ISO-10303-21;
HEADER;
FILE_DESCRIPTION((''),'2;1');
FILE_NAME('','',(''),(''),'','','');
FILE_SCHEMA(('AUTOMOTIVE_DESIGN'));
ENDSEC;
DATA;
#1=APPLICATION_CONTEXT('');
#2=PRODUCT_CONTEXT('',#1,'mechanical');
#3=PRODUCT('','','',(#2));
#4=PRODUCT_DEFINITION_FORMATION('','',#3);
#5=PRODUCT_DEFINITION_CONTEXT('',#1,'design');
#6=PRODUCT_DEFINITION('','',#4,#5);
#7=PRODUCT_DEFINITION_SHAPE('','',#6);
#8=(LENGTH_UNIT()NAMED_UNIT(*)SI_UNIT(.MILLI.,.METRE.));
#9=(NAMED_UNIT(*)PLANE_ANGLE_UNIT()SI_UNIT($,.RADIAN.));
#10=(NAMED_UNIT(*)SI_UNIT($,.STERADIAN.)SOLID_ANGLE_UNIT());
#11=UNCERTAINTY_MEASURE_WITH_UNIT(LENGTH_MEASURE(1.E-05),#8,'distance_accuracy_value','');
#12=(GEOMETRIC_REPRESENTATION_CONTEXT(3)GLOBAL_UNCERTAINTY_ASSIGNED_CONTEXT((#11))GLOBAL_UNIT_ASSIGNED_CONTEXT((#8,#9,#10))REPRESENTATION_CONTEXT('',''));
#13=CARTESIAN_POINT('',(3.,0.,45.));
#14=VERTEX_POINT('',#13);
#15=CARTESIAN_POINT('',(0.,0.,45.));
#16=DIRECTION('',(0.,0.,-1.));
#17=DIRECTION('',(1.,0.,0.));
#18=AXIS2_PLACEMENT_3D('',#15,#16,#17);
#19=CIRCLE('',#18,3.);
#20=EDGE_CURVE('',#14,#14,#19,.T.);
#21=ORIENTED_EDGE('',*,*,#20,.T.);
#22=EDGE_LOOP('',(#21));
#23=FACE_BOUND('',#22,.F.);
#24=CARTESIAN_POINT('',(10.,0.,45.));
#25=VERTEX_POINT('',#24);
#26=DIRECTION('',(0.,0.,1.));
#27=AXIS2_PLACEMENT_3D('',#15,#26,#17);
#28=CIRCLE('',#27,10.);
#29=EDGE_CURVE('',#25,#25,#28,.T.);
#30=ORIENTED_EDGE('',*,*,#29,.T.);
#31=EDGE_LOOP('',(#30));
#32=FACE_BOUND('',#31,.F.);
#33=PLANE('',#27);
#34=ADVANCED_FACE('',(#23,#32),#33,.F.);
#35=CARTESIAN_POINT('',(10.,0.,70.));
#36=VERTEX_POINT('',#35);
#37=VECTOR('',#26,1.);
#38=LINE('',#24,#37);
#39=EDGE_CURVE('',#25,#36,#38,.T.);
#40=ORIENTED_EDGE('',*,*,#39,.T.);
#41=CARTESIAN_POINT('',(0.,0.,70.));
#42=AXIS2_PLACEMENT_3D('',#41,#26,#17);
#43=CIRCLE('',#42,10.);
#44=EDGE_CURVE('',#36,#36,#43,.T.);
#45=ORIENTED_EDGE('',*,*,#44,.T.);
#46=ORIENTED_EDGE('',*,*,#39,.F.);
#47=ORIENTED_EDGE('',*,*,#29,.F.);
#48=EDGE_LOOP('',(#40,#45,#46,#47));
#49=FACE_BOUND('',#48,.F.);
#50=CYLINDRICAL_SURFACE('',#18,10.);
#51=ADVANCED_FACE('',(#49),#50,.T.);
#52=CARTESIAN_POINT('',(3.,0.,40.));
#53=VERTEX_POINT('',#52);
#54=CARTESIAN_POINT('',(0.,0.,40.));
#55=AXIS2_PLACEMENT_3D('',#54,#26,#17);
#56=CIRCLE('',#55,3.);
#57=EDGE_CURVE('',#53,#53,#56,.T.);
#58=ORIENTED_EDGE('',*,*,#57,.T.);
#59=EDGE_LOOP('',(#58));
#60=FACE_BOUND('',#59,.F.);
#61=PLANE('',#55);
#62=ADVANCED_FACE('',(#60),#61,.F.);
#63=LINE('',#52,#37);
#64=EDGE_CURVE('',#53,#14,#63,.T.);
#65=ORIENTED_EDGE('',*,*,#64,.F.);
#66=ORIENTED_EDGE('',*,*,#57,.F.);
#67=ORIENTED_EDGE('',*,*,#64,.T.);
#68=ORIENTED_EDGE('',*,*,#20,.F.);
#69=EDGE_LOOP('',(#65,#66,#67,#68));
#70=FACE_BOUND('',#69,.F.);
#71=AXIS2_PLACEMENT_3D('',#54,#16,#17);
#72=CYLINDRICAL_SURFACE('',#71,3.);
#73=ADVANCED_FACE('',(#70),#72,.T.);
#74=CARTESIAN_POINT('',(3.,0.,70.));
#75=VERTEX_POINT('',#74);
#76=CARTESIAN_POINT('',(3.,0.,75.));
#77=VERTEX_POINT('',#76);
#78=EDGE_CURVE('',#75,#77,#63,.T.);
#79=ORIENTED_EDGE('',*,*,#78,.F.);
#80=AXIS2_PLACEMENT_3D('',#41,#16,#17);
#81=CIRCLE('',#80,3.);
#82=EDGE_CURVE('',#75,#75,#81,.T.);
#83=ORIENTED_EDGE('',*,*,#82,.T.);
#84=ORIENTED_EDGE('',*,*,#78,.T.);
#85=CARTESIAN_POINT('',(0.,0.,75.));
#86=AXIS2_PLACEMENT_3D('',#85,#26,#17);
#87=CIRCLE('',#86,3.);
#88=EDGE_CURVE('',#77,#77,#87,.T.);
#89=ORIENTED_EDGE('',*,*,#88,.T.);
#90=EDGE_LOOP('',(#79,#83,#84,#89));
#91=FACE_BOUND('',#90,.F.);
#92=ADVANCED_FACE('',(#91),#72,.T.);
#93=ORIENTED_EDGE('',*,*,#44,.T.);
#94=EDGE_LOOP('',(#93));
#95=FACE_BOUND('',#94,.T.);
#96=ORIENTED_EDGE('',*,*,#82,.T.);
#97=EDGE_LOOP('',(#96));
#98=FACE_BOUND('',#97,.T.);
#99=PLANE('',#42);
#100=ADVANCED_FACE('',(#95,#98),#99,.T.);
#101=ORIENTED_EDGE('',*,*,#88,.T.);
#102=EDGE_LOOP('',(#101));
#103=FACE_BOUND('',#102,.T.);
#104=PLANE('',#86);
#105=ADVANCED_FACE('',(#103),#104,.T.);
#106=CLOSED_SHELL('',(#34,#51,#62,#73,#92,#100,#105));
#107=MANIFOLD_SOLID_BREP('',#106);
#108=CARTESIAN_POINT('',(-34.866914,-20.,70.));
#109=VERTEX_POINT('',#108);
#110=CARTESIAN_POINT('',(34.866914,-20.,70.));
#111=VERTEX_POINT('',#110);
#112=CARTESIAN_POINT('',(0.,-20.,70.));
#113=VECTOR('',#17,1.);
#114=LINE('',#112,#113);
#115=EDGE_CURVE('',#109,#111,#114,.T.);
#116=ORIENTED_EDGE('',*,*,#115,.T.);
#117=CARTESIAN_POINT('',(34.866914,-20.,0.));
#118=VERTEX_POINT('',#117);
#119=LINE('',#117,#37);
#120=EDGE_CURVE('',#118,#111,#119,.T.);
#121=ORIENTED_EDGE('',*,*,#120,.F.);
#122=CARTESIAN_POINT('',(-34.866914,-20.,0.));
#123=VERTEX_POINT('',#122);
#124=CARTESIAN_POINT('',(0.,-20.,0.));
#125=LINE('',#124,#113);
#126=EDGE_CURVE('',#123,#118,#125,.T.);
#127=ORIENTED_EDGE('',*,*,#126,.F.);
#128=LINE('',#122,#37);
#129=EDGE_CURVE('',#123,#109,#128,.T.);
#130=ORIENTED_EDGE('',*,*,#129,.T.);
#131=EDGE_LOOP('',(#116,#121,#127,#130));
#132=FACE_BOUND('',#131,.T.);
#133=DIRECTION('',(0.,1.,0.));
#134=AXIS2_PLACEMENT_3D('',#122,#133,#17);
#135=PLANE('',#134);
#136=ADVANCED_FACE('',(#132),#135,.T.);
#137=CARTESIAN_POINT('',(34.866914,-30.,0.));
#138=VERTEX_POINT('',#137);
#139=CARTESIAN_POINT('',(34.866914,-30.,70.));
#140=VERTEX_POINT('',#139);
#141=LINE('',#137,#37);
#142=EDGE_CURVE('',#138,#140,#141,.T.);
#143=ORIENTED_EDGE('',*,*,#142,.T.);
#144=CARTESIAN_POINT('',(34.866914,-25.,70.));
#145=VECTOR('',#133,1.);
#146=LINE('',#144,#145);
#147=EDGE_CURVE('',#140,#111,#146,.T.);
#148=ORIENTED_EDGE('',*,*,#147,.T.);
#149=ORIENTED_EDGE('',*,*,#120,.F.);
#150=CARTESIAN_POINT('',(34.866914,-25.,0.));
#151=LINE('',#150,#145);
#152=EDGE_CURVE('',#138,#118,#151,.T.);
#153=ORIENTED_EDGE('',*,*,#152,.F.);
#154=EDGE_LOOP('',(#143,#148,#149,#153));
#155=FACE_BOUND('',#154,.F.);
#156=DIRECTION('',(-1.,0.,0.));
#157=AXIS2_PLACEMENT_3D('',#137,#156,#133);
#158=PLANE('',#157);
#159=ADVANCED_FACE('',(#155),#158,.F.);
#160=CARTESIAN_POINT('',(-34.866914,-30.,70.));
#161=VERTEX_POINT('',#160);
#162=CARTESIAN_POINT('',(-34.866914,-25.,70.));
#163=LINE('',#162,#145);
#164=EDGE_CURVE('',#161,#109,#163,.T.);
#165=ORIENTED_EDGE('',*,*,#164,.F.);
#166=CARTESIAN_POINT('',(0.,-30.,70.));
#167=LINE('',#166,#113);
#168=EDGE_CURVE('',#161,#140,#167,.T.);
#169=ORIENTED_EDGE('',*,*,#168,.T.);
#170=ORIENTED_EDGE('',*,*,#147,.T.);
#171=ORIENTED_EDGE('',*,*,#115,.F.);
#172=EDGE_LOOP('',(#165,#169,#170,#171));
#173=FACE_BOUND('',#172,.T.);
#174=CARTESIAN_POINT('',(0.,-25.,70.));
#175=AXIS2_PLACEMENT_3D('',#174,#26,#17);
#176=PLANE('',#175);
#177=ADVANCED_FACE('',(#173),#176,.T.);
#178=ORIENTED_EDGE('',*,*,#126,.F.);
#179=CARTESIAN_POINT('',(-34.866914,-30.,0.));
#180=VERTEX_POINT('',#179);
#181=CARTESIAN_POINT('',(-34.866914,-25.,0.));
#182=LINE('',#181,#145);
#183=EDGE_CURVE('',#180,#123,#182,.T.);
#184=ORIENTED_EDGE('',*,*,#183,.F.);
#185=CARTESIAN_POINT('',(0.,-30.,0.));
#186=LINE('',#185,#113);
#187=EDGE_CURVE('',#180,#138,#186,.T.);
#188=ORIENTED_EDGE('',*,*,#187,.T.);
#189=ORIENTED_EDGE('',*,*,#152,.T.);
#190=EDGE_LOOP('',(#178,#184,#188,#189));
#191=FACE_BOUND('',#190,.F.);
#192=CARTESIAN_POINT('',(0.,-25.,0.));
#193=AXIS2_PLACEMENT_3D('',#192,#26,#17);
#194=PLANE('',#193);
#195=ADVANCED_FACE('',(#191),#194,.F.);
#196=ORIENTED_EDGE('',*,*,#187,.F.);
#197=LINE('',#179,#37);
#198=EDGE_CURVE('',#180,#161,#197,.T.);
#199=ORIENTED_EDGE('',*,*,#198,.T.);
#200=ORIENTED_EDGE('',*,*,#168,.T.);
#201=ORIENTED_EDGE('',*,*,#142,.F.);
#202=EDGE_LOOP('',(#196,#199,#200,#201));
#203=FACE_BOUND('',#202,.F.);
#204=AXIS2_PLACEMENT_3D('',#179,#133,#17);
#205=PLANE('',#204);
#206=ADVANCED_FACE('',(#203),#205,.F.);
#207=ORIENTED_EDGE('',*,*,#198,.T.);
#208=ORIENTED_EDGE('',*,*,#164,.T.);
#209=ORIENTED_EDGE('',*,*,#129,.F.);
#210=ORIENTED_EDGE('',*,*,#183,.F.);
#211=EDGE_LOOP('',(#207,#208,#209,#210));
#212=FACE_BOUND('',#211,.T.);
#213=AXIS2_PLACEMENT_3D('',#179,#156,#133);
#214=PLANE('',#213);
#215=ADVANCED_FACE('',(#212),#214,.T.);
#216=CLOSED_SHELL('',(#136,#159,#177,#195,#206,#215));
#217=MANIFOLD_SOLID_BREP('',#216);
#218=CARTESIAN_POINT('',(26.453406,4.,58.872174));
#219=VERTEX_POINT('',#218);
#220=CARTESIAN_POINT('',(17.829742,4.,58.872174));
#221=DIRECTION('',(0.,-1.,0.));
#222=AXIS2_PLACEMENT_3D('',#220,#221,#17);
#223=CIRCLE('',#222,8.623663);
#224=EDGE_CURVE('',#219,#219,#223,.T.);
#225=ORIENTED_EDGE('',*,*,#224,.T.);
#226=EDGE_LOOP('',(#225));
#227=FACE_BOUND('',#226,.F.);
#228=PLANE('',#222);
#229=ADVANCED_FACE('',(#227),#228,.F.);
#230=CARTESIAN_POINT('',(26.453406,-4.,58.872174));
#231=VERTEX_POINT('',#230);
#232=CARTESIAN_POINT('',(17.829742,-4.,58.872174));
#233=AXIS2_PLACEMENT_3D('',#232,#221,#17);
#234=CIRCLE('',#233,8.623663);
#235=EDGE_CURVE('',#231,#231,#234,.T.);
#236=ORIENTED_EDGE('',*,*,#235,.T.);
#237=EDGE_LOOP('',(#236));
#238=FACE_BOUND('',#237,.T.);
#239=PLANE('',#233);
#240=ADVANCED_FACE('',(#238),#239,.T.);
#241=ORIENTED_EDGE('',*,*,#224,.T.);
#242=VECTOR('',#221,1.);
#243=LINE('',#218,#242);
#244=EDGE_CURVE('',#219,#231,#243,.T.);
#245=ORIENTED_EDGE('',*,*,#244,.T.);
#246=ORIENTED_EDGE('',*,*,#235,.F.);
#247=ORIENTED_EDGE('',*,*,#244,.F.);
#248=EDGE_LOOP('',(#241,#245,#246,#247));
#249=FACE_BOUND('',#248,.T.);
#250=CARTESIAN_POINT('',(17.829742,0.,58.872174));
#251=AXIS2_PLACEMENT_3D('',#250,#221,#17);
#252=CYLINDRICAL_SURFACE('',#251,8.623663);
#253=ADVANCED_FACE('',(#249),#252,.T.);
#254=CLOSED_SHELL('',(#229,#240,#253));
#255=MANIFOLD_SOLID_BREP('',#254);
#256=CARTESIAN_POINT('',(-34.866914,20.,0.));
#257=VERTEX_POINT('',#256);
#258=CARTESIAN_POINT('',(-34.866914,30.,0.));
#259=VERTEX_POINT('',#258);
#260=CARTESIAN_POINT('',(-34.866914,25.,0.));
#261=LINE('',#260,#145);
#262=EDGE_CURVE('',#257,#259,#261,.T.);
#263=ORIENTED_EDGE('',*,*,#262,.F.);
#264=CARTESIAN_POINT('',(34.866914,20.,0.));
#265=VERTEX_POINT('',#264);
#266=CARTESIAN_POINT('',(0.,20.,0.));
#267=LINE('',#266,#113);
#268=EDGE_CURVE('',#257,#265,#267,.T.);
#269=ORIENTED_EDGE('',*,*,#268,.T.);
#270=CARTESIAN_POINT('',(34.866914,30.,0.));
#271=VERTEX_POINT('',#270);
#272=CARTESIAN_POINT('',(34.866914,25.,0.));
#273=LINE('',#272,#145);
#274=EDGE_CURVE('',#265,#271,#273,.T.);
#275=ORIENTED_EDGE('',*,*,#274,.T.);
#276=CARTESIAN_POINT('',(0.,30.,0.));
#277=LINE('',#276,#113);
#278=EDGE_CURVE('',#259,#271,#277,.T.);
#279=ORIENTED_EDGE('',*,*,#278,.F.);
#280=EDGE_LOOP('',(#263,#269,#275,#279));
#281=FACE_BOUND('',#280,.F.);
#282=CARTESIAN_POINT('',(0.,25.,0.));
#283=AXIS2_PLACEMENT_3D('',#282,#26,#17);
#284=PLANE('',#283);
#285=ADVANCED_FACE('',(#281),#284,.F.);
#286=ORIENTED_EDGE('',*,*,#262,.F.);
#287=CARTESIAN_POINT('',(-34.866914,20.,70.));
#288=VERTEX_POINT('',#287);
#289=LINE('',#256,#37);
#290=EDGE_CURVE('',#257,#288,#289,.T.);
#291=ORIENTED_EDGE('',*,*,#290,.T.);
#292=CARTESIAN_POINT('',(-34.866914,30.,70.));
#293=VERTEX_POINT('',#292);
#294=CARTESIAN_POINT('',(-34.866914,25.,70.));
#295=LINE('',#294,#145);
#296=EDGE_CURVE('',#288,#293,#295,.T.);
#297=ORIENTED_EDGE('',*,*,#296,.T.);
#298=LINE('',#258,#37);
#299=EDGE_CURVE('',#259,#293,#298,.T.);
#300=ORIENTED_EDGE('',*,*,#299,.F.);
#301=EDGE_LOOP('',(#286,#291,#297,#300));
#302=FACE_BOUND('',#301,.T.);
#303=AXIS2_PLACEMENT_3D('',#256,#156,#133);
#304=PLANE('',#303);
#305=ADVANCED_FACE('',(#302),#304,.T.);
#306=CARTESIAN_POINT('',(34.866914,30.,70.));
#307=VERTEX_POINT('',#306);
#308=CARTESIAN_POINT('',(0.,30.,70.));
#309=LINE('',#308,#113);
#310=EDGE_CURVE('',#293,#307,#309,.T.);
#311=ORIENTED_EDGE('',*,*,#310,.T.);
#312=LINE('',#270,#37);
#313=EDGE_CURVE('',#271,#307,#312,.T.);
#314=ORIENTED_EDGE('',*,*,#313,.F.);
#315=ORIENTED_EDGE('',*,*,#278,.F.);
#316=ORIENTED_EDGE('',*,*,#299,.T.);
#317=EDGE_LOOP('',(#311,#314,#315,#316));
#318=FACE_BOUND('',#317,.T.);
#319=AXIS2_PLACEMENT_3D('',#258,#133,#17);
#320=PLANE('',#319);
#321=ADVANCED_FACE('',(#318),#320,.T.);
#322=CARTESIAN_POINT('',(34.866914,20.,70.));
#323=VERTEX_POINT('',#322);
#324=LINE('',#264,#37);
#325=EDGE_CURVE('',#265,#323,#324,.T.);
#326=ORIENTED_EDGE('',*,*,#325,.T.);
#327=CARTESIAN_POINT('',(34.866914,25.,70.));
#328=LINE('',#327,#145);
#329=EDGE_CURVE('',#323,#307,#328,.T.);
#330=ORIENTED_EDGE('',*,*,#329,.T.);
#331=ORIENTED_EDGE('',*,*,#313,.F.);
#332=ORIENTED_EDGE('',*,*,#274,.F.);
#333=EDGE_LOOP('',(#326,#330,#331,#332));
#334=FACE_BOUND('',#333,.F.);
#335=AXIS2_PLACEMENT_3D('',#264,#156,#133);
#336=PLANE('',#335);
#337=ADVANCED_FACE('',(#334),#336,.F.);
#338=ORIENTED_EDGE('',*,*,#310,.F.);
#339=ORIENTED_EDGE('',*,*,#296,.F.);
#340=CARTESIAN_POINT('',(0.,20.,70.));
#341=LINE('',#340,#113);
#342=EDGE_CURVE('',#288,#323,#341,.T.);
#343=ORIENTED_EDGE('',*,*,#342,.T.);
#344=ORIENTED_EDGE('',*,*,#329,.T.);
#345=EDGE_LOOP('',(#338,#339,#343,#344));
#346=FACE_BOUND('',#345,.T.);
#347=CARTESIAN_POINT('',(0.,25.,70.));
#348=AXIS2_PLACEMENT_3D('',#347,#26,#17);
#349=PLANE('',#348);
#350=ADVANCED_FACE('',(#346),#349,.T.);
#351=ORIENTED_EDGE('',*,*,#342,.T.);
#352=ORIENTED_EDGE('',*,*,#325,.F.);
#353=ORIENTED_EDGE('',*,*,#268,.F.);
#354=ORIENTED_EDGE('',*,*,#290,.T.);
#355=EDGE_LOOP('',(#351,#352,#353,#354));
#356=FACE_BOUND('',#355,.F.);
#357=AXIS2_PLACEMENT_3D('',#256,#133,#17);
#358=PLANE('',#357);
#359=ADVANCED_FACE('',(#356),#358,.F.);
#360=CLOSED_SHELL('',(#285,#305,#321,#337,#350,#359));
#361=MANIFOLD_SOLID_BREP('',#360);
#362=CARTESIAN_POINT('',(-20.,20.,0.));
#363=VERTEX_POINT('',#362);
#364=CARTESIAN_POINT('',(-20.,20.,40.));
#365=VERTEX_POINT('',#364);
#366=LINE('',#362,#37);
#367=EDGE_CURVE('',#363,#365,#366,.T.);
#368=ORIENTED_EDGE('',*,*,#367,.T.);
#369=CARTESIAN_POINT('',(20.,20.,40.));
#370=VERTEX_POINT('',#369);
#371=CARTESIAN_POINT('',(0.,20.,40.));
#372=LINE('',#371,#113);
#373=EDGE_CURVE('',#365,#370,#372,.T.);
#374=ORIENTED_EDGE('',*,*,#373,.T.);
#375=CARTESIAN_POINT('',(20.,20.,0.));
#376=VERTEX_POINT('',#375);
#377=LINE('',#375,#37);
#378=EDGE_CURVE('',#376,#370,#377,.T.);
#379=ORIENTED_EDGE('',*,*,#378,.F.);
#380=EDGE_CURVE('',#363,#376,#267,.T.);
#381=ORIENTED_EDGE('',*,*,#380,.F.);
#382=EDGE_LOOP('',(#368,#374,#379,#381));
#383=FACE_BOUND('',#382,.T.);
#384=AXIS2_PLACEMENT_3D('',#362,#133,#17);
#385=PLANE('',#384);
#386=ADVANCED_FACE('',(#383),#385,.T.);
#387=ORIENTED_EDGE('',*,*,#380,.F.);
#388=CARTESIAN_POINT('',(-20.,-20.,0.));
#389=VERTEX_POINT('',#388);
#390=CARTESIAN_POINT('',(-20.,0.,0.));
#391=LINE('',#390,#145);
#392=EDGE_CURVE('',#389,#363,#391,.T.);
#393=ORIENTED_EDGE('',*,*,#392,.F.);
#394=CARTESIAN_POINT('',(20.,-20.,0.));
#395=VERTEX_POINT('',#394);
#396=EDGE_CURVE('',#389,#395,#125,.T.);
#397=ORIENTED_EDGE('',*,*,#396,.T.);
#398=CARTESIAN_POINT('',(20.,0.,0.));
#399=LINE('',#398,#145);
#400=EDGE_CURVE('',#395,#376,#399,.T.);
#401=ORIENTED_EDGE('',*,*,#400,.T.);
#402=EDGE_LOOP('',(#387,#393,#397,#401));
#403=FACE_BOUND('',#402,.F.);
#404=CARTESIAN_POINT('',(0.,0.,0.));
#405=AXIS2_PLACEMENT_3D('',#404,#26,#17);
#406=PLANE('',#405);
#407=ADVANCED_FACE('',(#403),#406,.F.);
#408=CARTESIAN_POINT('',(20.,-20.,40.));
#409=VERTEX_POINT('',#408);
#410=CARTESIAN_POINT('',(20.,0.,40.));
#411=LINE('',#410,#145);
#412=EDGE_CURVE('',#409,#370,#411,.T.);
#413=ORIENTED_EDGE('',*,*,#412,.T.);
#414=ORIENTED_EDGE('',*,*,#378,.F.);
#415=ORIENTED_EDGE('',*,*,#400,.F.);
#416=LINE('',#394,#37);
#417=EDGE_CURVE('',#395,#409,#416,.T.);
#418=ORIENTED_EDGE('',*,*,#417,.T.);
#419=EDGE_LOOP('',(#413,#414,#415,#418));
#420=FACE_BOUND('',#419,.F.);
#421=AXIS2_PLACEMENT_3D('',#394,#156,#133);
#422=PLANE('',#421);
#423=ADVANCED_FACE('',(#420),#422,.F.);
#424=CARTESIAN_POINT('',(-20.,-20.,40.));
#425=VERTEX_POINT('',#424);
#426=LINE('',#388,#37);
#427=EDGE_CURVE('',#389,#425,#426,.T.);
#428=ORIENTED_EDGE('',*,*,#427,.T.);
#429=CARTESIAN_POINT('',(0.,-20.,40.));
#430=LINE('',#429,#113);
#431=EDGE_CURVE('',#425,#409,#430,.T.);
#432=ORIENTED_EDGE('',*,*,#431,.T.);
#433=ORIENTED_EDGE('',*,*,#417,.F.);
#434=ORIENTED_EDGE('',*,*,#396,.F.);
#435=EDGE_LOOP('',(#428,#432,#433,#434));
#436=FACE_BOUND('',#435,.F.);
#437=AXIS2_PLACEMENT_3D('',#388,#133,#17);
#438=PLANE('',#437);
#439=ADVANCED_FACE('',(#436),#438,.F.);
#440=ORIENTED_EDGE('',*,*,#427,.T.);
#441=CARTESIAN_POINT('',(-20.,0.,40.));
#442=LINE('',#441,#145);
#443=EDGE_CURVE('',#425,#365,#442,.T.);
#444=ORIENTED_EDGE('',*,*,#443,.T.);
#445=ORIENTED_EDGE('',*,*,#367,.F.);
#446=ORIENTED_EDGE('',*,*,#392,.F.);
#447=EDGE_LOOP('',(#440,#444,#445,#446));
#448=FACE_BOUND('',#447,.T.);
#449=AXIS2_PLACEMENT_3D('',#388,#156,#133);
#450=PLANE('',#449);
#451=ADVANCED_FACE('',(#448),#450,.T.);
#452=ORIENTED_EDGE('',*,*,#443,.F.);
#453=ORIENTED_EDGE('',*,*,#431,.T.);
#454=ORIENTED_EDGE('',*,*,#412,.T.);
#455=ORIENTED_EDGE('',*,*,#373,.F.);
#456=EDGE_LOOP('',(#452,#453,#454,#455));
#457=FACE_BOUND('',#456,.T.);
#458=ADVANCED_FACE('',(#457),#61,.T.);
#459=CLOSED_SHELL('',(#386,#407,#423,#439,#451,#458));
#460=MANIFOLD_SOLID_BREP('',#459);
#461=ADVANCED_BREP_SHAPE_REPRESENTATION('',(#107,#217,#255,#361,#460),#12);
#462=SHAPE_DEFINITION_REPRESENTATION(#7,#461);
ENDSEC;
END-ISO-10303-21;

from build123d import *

# Parameters (mm, degrees)
F0_W      = 40
F0_H      = 40
F1_DEPTH  = 40
F2_R      = 3
F3_DEPTH  = 35
F5_R      = 10
F6_DEPTH  = 25
F7_R      = 8.6236634439
F8_DEPTH  = 4
F9_W      = 69.7338283062
F9_H      = 10
F10_DEPTH = 70


# Not quite as in the source:
# - the program builds the solid bodies; features that only make, move or delete a surface that nothing else refers to are left out


with BuildPart() as f1:
    # F0 (on Top) → F1 (new body)
    with BuildSketch(Plane.XY):
        Rectangle(F0_W, F0_H)
    extrude(amount=F1_DEPTH)


with BuildPart() as f3:
    # F2 (on face) → F3 (new body)
    with BuildSketch(Plane.XY.offset(40)):
        Circle(F2_R)
    extrude(amount=F3_DEPTH)

    # F5 (on offset) → F6 (join)
    with BuildSketch(Plane.XY.offset(45)):
        Circle(F5_R)
    extrude(amount=F6_DEPTH)


with BuildPart() as f8:
    # F7 (on Front) → F8 (new body, symmetric)
    with BuildSketch(Plane.XZ):
        with Locations((17.8297422826, 58.8721744716)):
            Circle(F7_R)
    extrude(amount=F8_DEPTH, both=True)


with BuildPart() as f10:
    # F9 (on Top) → F10 (new body)
    with BuildSketch(Plane.XY):
        with Locations((0, 25)):
            Rectangle(F9_W, F9_H)
    extrude(amount=F10_DEPTH)


with BuildPart() as f10b:
    # F9 (on Top) → F10, piece 2 (new body)
    with BuildSketch(Plane.XY):
        with Locations((0, -25)):
            Rectangle(F9_W, F9_H)
    extrude(amount=F10_DEPTH)


solid = Compound([f1.part, f3.part, f8.part, f10.part, f10b.part])
